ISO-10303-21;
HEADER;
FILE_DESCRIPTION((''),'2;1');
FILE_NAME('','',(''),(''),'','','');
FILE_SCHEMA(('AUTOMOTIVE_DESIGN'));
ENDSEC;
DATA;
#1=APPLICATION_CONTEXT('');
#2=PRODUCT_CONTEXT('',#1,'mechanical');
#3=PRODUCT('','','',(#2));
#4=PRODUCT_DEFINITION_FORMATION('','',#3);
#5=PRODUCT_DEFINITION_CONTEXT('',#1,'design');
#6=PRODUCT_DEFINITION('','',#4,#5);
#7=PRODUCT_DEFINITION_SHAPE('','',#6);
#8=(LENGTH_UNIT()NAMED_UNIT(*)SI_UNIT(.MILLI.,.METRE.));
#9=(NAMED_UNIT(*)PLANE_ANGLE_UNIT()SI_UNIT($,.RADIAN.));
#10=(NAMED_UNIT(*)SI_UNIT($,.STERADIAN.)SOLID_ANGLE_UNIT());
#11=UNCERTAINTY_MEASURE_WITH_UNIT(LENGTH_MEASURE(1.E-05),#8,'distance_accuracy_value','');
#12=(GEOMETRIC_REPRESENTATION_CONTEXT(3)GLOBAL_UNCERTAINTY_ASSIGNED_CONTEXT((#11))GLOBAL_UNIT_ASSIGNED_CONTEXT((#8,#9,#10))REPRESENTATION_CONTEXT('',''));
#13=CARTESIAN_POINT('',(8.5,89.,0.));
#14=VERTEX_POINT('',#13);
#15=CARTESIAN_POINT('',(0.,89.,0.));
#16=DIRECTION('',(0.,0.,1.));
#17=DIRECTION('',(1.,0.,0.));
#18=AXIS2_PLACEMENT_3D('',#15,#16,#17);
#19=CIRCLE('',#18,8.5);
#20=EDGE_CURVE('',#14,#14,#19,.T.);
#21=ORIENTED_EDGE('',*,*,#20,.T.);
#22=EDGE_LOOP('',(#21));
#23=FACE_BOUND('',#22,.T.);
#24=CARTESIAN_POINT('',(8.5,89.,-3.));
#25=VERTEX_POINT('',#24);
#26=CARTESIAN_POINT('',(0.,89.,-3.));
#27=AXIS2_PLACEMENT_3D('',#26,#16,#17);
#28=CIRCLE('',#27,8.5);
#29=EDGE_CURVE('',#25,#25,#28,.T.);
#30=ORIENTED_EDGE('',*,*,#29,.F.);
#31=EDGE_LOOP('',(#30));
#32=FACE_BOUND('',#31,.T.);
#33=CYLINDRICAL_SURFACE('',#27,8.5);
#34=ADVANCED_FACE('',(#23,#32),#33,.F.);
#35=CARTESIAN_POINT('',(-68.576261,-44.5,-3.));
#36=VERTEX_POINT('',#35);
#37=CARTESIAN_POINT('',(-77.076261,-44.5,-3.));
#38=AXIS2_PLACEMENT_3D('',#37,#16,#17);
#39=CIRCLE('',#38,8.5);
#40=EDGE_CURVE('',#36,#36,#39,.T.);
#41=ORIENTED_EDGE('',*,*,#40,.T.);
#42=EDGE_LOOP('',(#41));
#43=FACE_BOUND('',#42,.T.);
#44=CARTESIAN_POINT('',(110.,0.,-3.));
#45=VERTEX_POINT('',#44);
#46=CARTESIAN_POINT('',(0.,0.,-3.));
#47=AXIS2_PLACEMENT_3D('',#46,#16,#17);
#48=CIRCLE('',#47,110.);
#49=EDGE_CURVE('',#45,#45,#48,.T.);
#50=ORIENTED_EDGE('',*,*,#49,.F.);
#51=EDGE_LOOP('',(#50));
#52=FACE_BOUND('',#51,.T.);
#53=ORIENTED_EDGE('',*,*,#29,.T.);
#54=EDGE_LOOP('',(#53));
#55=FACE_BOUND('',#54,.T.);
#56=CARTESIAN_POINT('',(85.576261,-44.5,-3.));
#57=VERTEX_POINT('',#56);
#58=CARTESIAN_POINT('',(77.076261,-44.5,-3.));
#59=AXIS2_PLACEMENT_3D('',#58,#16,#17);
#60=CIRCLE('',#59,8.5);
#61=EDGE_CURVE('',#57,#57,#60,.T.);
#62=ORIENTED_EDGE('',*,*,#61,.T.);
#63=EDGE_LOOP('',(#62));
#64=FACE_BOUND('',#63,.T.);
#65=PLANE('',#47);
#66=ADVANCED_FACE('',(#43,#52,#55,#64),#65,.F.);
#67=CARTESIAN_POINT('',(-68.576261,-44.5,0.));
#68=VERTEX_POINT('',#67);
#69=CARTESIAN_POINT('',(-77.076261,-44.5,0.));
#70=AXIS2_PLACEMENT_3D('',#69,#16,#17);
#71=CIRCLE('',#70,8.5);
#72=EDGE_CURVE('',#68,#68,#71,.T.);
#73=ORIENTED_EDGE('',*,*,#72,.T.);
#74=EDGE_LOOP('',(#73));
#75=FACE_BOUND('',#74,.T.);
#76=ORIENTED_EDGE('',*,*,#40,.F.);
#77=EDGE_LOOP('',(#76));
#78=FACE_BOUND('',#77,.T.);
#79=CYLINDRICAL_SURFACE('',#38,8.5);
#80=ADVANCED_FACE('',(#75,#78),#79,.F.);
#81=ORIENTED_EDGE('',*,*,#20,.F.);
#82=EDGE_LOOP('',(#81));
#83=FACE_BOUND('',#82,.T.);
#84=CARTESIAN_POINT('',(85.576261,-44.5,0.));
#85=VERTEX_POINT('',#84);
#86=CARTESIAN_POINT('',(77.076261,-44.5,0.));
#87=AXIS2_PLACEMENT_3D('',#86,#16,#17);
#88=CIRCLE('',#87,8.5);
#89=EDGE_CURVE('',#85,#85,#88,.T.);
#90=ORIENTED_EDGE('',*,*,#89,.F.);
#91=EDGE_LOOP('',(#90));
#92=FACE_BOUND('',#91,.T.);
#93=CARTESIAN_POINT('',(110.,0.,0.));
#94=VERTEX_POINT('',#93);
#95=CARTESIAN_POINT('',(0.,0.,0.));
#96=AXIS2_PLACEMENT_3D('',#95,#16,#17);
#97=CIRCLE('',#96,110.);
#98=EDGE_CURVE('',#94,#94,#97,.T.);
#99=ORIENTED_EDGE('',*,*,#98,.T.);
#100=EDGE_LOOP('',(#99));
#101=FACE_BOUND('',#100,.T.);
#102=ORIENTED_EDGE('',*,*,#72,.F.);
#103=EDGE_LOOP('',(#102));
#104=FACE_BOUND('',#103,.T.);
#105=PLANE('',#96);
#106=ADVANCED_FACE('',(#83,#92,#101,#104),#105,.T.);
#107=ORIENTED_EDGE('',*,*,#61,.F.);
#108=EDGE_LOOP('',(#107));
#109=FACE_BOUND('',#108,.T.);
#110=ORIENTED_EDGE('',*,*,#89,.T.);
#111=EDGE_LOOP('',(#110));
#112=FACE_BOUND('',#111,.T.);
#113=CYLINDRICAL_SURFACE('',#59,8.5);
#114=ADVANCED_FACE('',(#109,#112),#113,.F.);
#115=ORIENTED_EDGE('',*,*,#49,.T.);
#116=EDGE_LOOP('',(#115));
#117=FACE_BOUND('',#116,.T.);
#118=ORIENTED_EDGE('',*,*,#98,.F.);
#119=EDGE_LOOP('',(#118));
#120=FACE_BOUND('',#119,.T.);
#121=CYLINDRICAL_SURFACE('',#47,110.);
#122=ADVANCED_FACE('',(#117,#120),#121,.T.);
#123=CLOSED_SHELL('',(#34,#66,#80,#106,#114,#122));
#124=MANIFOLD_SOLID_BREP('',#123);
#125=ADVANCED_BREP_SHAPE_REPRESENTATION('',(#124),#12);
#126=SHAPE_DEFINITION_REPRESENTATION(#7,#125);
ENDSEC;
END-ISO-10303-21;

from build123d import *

# Parameters (mm, degrees)
SKETCH_1_R             = 110
SKETCH_1_R_2           = 8.5
SM_BASE_FLANGE_1_DEPTH = 3


# Sheet-metal steps are written as plain solids
with BuildPart() as part:
    # Sketch 1 → Базовая кромка1 (new body)
    with BuildSketch(Plane.XY):
        Circle(SKETCH_1_R)
        with Locations((0, 89)):
            Circle(SKETCH_1_R_2, mode=Mode.SUBTRACT)
        with Locations((77.076260937, -44.5)):
            Circle(SKETCH_1_R_2, mode=Mode.SUBTRACT)
        with Locations((-77.076260937, -44.5)):
            Circle(SKETCH_1_R_2, mode=Mode.SUBTRACT)
    extrude(amount=-SM_BASE_FLANGE_1_DEPTH)


solid = part.part
